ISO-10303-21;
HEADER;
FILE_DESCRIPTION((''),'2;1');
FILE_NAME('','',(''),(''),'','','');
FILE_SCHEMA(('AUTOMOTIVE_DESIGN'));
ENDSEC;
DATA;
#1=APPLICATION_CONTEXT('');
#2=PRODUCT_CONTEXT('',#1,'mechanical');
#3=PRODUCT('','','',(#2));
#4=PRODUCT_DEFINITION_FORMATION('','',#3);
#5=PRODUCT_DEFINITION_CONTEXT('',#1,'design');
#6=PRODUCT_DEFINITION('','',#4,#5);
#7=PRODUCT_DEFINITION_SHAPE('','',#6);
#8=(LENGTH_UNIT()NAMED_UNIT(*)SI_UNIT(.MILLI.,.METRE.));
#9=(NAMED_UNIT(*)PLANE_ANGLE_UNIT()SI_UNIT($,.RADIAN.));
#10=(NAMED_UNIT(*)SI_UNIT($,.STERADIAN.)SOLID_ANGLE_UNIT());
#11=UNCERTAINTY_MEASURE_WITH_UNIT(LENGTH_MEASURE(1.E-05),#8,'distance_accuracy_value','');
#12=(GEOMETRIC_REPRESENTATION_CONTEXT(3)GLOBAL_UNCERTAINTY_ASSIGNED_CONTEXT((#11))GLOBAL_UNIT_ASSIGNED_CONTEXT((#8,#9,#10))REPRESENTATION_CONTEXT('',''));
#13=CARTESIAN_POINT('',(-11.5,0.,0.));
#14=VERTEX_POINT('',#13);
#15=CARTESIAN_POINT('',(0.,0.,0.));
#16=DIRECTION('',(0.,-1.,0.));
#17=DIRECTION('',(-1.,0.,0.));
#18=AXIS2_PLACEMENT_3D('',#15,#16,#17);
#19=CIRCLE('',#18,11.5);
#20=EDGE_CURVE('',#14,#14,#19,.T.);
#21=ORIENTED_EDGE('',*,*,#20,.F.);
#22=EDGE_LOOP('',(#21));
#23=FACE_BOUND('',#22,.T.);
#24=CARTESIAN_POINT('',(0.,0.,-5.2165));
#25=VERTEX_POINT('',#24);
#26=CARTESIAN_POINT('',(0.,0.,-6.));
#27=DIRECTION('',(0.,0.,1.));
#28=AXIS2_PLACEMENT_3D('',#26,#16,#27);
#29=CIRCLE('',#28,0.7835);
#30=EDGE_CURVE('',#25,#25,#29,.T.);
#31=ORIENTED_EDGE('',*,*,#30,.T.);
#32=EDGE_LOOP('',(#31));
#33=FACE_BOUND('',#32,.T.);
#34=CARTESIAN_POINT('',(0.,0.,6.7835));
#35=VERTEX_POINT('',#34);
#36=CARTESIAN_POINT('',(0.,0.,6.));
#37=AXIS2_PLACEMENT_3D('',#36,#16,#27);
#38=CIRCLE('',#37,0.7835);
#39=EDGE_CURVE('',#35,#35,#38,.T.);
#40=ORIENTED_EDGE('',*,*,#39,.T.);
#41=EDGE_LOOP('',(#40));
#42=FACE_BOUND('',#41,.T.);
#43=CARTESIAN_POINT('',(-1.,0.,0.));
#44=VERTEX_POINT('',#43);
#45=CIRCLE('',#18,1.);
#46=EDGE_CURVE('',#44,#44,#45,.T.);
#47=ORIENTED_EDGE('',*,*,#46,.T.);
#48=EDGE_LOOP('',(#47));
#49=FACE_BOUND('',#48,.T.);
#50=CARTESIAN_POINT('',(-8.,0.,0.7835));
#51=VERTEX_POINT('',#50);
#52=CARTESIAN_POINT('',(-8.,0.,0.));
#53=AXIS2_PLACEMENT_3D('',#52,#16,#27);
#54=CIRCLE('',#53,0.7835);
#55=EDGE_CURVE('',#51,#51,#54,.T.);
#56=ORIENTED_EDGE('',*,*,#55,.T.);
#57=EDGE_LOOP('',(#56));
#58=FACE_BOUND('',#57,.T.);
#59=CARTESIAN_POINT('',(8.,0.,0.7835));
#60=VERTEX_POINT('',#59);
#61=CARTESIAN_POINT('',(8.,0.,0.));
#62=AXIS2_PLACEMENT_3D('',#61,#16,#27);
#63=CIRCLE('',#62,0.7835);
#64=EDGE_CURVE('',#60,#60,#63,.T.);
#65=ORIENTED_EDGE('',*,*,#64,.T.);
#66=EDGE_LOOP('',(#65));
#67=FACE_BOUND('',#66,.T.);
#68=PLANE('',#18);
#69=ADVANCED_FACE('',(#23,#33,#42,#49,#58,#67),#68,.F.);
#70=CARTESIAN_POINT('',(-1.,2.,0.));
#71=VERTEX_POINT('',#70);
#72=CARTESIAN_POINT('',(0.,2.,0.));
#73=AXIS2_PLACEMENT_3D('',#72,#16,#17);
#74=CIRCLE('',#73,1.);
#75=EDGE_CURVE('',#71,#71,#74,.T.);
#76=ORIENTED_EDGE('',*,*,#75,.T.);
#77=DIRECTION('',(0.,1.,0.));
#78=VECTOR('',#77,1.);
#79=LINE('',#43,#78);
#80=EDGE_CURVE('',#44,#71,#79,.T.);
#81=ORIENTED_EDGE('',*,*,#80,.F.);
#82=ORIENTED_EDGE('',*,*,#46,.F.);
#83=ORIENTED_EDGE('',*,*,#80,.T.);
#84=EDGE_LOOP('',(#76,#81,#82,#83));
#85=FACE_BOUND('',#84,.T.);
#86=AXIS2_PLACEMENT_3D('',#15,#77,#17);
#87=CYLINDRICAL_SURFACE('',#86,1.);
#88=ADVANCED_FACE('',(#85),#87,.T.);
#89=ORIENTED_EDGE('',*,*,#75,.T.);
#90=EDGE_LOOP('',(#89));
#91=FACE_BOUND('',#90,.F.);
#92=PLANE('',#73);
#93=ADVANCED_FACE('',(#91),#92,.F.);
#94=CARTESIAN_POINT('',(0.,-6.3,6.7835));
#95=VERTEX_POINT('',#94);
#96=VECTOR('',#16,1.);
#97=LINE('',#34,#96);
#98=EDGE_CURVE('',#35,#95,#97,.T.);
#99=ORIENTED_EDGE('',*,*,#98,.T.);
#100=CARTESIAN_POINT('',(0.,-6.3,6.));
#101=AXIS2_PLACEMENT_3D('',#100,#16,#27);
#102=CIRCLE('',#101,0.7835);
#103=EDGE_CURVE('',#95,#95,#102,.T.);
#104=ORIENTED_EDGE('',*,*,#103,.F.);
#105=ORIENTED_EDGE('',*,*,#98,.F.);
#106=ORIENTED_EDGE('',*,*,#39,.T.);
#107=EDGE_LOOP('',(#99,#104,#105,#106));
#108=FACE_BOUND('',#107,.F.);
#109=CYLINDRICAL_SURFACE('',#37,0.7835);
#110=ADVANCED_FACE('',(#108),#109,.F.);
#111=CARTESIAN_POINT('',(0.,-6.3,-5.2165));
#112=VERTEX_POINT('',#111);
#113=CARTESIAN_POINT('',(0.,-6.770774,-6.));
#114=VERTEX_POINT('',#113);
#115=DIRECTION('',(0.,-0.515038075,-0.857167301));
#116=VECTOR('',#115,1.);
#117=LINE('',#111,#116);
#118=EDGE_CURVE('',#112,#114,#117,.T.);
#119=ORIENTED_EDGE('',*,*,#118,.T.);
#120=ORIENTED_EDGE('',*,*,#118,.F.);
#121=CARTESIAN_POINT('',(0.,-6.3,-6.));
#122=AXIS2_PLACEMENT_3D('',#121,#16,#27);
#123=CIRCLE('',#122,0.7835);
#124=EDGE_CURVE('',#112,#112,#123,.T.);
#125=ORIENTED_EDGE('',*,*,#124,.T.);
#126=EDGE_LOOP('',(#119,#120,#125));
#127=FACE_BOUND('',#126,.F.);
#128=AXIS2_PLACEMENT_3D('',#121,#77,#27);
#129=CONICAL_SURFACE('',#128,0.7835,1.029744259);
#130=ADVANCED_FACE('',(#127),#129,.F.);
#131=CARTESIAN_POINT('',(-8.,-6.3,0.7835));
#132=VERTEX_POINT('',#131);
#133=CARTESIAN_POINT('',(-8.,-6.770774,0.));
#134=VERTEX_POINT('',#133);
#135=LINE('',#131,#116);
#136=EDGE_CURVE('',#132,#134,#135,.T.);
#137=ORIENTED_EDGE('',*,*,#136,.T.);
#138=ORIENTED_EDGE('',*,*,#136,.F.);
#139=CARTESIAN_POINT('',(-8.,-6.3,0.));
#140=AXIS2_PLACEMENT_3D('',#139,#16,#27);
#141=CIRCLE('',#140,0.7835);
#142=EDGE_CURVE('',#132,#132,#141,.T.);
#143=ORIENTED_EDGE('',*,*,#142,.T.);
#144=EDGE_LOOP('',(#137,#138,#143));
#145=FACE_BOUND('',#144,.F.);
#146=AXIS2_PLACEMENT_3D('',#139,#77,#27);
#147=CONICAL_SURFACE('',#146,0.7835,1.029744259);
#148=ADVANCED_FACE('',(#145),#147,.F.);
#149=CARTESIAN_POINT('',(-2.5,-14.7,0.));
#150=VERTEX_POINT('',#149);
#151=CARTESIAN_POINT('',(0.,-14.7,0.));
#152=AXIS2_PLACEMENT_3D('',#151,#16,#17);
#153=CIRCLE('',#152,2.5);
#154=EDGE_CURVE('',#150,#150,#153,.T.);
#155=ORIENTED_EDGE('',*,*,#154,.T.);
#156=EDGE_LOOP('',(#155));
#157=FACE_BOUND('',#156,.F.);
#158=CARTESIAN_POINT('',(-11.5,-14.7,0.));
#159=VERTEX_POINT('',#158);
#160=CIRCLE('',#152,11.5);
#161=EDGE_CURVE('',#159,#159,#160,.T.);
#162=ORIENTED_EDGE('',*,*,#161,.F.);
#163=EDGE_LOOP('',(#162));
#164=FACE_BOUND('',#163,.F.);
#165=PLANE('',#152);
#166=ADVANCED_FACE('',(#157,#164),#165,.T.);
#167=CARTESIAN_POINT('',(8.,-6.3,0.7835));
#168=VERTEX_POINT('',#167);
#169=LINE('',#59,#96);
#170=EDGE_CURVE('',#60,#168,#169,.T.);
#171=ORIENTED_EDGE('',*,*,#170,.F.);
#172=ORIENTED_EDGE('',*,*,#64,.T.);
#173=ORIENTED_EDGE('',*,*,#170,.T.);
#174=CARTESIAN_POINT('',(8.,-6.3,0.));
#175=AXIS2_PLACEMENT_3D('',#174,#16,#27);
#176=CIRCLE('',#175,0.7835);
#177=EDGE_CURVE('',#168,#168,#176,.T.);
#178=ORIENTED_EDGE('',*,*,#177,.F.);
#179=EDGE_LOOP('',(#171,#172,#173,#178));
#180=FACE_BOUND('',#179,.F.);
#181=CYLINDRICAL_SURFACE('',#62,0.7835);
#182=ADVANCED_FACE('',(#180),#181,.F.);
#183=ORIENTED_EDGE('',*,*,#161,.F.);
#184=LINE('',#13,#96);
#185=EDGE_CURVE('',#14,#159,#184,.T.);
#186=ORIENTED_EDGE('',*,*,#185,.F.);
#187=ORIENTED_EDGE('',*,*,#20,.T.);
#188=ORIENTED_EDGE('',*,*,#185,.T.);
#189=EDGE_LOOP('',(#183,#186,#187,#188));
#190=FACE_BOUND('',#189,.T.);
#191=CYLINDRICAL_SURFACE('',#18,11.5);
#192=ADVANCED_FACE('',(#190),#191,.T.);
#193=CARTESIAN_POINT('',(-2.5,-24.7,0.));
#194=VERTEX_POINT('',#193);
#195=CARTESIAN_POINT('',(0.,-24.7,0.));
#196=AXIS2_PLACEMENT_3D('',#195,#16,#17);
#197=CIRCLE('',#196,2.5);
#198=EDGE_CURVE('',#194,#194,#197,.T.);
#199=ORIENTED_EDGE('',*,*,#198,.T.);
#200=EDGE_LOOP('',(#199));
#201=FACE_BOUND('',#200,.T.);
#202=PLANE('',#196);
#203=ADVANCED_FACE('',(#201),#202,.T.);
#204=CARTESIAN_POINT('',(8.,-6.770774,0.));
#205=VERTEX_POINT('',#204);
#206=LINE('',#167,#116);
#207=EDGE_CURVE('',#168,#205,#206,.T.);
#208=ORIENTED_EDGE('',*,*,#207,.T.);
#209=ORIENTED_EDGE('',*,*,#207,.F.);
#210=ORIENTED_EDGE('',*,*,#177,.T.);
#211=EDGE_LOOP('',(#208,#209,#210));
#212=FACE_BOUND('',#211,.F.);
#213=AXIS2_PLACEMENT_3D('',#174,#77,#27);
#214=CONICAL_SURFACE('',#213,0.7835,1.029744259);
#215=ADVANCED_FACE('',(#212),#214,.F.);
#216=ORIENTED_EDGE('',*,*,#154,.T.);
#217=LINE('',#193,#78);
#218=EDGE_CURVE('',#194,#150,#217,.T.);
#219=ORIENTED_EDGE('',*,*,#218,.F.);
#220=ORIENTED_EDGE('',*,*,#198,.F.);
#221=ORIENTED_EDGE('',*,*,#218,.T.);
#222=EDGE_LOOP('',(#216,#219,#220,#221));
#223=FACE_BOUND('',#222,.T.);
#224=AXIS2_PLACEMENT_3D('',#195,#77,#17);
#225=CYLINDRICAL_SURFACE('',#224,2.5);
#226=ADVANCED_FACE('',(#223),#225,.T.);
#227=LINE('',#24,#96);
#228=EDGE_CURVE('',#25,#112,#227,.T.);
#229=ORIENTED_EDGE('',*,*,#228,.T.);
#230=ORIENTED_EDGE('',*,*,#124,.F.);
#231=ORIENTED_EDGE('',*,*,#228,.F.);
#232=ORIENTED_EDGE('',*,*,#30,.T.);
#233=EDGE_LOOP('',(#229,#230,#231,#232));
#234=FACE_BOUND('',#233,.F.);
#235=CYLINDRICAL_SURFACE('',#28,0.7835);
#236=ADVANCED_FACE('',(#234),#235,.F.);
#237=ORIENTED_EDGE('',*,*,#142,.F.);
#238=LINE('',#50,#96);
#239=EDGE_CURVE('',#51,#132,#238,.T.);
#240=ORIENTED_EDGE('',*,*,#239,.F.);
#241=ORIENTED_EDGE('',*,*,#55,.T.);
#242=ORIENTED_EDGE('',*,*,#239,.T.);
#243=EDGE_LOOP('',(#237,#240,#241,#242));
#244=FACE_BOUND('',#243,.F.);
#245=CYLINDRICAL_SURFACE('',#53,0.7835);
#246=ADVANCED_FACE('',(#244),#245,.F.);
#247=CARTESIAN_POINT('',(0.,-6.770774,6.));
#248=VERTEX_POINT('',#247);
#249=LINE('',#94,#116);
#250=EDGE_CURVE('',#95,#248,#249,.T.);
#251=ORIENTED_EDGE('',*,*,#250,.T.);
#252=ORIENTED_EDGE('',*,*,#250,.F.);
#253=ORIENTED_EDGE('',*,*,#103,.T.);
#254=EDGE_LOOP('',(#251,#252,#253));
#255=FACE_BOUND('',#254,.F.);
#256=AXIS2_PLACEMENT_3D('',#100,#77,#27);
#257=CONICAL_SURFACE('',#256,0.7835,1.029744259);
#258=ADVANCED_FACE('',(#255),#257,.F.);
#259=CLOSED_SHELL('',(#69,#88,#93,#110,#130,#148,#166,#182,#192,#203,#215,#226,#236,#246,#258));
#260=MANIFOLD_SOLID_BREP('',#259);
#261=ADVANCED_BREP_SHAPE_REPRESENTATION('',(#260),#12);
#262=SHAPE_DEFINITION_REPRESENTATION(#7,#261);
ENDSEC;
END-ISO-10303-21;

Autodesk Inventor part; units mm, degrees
ref_plane "YZ Plane" through (0, 0, 0) normal (1, 0, 0) x (0, 1, 0)
ref_plane "XZ Plane" through (0, 0, 0) normal (0, 1, 0) x (-1, 0, 0)
ref_plane "XY Plane" through (0, 0, 0) normal (0, 0, 1) x (1, 0, 0)
sketch "Sketch1" plane through (0, 0, 0) normal (0, 0, 1) x (1, 0, 0)
  line L0 (0, 0) -> (-11.5, 0)
  line L1 (-11.5, 0) -> (-11.5, -24.7)
  line L2 (-11.5, -24.7) -> (0, -24.7)
  line L3 (0, -24.7) -> (0, 0)
  line L4 (0, -24.7) -> (-2.5, -24.7)
  line L5 (-2.5, -24.7) -> (-2.5, -14.7)
  line L6 (-2.5, -14.7) -> (0, -14.7)
  line L7 (0, -14.7) -> (0, -24.7)
  line L8 (0, 0) -> (-1, 0)
  line L9 (-1, 0) -> (-1, 2)
  line L10 (-1, 2) -> (0, 2)
  line L11 (0, 2) -> (0, 0)
  line L12 (0, -14.7) -> (-11.5, -14.7)
  line L13 (-11.5, -14.7) -> (-11.5, 0)
  line L14 (-11.5, 0) -> (0, 0)
  line L15 (0, 0) -> (0, -14.7)
  dimension "d0" = 11.5
  dimension "d1" = 24.7
  dimension "d2" = 2.5
  dimension "d3" = 10
  dimension "d4" = 1
  dimension "d5" = 2
revolve "Revolution1" add sketch "Sketch1" angle 360 about axis through (0, 0, 0) along (0, -1, 0) contours L3 L6 L12 L1 L0 | L0 L9 L10 L11 | L3 L2 L5 L6
thread "Thread1" size "M5x0.8" class "6g" standard "ANSI Metric M Profile" length 7 offset 3
sketch "Sketch2" plane through (0, 0, 0) normal (0, 1, 0) x (1, 0, 0)
  point P0 (0, 0)
  point P1 (8, 0)
  point P2 (-8, 0)
  point P3 (0, -6)
  point P4 (0, 6)
  dimension "d9" = 6
  dimension "d10" = 6
  dimension "d11" = 8
  dimension "d12" = 8
hole "Hole1" at (8, 0, 0) at (-8, 0, 0) at (0, 0, 6) at (0, 0, -6) direction (0, -1, 0) diameter 1.567 depth 6.3 tip angle 118 thread size "M2x0.4" class "6H" standard "ISO Metric profile"
equation "\"d10\" = d9"
equation "\"d12\" = d11"
properties part number "Emax 1806 2280kv"
